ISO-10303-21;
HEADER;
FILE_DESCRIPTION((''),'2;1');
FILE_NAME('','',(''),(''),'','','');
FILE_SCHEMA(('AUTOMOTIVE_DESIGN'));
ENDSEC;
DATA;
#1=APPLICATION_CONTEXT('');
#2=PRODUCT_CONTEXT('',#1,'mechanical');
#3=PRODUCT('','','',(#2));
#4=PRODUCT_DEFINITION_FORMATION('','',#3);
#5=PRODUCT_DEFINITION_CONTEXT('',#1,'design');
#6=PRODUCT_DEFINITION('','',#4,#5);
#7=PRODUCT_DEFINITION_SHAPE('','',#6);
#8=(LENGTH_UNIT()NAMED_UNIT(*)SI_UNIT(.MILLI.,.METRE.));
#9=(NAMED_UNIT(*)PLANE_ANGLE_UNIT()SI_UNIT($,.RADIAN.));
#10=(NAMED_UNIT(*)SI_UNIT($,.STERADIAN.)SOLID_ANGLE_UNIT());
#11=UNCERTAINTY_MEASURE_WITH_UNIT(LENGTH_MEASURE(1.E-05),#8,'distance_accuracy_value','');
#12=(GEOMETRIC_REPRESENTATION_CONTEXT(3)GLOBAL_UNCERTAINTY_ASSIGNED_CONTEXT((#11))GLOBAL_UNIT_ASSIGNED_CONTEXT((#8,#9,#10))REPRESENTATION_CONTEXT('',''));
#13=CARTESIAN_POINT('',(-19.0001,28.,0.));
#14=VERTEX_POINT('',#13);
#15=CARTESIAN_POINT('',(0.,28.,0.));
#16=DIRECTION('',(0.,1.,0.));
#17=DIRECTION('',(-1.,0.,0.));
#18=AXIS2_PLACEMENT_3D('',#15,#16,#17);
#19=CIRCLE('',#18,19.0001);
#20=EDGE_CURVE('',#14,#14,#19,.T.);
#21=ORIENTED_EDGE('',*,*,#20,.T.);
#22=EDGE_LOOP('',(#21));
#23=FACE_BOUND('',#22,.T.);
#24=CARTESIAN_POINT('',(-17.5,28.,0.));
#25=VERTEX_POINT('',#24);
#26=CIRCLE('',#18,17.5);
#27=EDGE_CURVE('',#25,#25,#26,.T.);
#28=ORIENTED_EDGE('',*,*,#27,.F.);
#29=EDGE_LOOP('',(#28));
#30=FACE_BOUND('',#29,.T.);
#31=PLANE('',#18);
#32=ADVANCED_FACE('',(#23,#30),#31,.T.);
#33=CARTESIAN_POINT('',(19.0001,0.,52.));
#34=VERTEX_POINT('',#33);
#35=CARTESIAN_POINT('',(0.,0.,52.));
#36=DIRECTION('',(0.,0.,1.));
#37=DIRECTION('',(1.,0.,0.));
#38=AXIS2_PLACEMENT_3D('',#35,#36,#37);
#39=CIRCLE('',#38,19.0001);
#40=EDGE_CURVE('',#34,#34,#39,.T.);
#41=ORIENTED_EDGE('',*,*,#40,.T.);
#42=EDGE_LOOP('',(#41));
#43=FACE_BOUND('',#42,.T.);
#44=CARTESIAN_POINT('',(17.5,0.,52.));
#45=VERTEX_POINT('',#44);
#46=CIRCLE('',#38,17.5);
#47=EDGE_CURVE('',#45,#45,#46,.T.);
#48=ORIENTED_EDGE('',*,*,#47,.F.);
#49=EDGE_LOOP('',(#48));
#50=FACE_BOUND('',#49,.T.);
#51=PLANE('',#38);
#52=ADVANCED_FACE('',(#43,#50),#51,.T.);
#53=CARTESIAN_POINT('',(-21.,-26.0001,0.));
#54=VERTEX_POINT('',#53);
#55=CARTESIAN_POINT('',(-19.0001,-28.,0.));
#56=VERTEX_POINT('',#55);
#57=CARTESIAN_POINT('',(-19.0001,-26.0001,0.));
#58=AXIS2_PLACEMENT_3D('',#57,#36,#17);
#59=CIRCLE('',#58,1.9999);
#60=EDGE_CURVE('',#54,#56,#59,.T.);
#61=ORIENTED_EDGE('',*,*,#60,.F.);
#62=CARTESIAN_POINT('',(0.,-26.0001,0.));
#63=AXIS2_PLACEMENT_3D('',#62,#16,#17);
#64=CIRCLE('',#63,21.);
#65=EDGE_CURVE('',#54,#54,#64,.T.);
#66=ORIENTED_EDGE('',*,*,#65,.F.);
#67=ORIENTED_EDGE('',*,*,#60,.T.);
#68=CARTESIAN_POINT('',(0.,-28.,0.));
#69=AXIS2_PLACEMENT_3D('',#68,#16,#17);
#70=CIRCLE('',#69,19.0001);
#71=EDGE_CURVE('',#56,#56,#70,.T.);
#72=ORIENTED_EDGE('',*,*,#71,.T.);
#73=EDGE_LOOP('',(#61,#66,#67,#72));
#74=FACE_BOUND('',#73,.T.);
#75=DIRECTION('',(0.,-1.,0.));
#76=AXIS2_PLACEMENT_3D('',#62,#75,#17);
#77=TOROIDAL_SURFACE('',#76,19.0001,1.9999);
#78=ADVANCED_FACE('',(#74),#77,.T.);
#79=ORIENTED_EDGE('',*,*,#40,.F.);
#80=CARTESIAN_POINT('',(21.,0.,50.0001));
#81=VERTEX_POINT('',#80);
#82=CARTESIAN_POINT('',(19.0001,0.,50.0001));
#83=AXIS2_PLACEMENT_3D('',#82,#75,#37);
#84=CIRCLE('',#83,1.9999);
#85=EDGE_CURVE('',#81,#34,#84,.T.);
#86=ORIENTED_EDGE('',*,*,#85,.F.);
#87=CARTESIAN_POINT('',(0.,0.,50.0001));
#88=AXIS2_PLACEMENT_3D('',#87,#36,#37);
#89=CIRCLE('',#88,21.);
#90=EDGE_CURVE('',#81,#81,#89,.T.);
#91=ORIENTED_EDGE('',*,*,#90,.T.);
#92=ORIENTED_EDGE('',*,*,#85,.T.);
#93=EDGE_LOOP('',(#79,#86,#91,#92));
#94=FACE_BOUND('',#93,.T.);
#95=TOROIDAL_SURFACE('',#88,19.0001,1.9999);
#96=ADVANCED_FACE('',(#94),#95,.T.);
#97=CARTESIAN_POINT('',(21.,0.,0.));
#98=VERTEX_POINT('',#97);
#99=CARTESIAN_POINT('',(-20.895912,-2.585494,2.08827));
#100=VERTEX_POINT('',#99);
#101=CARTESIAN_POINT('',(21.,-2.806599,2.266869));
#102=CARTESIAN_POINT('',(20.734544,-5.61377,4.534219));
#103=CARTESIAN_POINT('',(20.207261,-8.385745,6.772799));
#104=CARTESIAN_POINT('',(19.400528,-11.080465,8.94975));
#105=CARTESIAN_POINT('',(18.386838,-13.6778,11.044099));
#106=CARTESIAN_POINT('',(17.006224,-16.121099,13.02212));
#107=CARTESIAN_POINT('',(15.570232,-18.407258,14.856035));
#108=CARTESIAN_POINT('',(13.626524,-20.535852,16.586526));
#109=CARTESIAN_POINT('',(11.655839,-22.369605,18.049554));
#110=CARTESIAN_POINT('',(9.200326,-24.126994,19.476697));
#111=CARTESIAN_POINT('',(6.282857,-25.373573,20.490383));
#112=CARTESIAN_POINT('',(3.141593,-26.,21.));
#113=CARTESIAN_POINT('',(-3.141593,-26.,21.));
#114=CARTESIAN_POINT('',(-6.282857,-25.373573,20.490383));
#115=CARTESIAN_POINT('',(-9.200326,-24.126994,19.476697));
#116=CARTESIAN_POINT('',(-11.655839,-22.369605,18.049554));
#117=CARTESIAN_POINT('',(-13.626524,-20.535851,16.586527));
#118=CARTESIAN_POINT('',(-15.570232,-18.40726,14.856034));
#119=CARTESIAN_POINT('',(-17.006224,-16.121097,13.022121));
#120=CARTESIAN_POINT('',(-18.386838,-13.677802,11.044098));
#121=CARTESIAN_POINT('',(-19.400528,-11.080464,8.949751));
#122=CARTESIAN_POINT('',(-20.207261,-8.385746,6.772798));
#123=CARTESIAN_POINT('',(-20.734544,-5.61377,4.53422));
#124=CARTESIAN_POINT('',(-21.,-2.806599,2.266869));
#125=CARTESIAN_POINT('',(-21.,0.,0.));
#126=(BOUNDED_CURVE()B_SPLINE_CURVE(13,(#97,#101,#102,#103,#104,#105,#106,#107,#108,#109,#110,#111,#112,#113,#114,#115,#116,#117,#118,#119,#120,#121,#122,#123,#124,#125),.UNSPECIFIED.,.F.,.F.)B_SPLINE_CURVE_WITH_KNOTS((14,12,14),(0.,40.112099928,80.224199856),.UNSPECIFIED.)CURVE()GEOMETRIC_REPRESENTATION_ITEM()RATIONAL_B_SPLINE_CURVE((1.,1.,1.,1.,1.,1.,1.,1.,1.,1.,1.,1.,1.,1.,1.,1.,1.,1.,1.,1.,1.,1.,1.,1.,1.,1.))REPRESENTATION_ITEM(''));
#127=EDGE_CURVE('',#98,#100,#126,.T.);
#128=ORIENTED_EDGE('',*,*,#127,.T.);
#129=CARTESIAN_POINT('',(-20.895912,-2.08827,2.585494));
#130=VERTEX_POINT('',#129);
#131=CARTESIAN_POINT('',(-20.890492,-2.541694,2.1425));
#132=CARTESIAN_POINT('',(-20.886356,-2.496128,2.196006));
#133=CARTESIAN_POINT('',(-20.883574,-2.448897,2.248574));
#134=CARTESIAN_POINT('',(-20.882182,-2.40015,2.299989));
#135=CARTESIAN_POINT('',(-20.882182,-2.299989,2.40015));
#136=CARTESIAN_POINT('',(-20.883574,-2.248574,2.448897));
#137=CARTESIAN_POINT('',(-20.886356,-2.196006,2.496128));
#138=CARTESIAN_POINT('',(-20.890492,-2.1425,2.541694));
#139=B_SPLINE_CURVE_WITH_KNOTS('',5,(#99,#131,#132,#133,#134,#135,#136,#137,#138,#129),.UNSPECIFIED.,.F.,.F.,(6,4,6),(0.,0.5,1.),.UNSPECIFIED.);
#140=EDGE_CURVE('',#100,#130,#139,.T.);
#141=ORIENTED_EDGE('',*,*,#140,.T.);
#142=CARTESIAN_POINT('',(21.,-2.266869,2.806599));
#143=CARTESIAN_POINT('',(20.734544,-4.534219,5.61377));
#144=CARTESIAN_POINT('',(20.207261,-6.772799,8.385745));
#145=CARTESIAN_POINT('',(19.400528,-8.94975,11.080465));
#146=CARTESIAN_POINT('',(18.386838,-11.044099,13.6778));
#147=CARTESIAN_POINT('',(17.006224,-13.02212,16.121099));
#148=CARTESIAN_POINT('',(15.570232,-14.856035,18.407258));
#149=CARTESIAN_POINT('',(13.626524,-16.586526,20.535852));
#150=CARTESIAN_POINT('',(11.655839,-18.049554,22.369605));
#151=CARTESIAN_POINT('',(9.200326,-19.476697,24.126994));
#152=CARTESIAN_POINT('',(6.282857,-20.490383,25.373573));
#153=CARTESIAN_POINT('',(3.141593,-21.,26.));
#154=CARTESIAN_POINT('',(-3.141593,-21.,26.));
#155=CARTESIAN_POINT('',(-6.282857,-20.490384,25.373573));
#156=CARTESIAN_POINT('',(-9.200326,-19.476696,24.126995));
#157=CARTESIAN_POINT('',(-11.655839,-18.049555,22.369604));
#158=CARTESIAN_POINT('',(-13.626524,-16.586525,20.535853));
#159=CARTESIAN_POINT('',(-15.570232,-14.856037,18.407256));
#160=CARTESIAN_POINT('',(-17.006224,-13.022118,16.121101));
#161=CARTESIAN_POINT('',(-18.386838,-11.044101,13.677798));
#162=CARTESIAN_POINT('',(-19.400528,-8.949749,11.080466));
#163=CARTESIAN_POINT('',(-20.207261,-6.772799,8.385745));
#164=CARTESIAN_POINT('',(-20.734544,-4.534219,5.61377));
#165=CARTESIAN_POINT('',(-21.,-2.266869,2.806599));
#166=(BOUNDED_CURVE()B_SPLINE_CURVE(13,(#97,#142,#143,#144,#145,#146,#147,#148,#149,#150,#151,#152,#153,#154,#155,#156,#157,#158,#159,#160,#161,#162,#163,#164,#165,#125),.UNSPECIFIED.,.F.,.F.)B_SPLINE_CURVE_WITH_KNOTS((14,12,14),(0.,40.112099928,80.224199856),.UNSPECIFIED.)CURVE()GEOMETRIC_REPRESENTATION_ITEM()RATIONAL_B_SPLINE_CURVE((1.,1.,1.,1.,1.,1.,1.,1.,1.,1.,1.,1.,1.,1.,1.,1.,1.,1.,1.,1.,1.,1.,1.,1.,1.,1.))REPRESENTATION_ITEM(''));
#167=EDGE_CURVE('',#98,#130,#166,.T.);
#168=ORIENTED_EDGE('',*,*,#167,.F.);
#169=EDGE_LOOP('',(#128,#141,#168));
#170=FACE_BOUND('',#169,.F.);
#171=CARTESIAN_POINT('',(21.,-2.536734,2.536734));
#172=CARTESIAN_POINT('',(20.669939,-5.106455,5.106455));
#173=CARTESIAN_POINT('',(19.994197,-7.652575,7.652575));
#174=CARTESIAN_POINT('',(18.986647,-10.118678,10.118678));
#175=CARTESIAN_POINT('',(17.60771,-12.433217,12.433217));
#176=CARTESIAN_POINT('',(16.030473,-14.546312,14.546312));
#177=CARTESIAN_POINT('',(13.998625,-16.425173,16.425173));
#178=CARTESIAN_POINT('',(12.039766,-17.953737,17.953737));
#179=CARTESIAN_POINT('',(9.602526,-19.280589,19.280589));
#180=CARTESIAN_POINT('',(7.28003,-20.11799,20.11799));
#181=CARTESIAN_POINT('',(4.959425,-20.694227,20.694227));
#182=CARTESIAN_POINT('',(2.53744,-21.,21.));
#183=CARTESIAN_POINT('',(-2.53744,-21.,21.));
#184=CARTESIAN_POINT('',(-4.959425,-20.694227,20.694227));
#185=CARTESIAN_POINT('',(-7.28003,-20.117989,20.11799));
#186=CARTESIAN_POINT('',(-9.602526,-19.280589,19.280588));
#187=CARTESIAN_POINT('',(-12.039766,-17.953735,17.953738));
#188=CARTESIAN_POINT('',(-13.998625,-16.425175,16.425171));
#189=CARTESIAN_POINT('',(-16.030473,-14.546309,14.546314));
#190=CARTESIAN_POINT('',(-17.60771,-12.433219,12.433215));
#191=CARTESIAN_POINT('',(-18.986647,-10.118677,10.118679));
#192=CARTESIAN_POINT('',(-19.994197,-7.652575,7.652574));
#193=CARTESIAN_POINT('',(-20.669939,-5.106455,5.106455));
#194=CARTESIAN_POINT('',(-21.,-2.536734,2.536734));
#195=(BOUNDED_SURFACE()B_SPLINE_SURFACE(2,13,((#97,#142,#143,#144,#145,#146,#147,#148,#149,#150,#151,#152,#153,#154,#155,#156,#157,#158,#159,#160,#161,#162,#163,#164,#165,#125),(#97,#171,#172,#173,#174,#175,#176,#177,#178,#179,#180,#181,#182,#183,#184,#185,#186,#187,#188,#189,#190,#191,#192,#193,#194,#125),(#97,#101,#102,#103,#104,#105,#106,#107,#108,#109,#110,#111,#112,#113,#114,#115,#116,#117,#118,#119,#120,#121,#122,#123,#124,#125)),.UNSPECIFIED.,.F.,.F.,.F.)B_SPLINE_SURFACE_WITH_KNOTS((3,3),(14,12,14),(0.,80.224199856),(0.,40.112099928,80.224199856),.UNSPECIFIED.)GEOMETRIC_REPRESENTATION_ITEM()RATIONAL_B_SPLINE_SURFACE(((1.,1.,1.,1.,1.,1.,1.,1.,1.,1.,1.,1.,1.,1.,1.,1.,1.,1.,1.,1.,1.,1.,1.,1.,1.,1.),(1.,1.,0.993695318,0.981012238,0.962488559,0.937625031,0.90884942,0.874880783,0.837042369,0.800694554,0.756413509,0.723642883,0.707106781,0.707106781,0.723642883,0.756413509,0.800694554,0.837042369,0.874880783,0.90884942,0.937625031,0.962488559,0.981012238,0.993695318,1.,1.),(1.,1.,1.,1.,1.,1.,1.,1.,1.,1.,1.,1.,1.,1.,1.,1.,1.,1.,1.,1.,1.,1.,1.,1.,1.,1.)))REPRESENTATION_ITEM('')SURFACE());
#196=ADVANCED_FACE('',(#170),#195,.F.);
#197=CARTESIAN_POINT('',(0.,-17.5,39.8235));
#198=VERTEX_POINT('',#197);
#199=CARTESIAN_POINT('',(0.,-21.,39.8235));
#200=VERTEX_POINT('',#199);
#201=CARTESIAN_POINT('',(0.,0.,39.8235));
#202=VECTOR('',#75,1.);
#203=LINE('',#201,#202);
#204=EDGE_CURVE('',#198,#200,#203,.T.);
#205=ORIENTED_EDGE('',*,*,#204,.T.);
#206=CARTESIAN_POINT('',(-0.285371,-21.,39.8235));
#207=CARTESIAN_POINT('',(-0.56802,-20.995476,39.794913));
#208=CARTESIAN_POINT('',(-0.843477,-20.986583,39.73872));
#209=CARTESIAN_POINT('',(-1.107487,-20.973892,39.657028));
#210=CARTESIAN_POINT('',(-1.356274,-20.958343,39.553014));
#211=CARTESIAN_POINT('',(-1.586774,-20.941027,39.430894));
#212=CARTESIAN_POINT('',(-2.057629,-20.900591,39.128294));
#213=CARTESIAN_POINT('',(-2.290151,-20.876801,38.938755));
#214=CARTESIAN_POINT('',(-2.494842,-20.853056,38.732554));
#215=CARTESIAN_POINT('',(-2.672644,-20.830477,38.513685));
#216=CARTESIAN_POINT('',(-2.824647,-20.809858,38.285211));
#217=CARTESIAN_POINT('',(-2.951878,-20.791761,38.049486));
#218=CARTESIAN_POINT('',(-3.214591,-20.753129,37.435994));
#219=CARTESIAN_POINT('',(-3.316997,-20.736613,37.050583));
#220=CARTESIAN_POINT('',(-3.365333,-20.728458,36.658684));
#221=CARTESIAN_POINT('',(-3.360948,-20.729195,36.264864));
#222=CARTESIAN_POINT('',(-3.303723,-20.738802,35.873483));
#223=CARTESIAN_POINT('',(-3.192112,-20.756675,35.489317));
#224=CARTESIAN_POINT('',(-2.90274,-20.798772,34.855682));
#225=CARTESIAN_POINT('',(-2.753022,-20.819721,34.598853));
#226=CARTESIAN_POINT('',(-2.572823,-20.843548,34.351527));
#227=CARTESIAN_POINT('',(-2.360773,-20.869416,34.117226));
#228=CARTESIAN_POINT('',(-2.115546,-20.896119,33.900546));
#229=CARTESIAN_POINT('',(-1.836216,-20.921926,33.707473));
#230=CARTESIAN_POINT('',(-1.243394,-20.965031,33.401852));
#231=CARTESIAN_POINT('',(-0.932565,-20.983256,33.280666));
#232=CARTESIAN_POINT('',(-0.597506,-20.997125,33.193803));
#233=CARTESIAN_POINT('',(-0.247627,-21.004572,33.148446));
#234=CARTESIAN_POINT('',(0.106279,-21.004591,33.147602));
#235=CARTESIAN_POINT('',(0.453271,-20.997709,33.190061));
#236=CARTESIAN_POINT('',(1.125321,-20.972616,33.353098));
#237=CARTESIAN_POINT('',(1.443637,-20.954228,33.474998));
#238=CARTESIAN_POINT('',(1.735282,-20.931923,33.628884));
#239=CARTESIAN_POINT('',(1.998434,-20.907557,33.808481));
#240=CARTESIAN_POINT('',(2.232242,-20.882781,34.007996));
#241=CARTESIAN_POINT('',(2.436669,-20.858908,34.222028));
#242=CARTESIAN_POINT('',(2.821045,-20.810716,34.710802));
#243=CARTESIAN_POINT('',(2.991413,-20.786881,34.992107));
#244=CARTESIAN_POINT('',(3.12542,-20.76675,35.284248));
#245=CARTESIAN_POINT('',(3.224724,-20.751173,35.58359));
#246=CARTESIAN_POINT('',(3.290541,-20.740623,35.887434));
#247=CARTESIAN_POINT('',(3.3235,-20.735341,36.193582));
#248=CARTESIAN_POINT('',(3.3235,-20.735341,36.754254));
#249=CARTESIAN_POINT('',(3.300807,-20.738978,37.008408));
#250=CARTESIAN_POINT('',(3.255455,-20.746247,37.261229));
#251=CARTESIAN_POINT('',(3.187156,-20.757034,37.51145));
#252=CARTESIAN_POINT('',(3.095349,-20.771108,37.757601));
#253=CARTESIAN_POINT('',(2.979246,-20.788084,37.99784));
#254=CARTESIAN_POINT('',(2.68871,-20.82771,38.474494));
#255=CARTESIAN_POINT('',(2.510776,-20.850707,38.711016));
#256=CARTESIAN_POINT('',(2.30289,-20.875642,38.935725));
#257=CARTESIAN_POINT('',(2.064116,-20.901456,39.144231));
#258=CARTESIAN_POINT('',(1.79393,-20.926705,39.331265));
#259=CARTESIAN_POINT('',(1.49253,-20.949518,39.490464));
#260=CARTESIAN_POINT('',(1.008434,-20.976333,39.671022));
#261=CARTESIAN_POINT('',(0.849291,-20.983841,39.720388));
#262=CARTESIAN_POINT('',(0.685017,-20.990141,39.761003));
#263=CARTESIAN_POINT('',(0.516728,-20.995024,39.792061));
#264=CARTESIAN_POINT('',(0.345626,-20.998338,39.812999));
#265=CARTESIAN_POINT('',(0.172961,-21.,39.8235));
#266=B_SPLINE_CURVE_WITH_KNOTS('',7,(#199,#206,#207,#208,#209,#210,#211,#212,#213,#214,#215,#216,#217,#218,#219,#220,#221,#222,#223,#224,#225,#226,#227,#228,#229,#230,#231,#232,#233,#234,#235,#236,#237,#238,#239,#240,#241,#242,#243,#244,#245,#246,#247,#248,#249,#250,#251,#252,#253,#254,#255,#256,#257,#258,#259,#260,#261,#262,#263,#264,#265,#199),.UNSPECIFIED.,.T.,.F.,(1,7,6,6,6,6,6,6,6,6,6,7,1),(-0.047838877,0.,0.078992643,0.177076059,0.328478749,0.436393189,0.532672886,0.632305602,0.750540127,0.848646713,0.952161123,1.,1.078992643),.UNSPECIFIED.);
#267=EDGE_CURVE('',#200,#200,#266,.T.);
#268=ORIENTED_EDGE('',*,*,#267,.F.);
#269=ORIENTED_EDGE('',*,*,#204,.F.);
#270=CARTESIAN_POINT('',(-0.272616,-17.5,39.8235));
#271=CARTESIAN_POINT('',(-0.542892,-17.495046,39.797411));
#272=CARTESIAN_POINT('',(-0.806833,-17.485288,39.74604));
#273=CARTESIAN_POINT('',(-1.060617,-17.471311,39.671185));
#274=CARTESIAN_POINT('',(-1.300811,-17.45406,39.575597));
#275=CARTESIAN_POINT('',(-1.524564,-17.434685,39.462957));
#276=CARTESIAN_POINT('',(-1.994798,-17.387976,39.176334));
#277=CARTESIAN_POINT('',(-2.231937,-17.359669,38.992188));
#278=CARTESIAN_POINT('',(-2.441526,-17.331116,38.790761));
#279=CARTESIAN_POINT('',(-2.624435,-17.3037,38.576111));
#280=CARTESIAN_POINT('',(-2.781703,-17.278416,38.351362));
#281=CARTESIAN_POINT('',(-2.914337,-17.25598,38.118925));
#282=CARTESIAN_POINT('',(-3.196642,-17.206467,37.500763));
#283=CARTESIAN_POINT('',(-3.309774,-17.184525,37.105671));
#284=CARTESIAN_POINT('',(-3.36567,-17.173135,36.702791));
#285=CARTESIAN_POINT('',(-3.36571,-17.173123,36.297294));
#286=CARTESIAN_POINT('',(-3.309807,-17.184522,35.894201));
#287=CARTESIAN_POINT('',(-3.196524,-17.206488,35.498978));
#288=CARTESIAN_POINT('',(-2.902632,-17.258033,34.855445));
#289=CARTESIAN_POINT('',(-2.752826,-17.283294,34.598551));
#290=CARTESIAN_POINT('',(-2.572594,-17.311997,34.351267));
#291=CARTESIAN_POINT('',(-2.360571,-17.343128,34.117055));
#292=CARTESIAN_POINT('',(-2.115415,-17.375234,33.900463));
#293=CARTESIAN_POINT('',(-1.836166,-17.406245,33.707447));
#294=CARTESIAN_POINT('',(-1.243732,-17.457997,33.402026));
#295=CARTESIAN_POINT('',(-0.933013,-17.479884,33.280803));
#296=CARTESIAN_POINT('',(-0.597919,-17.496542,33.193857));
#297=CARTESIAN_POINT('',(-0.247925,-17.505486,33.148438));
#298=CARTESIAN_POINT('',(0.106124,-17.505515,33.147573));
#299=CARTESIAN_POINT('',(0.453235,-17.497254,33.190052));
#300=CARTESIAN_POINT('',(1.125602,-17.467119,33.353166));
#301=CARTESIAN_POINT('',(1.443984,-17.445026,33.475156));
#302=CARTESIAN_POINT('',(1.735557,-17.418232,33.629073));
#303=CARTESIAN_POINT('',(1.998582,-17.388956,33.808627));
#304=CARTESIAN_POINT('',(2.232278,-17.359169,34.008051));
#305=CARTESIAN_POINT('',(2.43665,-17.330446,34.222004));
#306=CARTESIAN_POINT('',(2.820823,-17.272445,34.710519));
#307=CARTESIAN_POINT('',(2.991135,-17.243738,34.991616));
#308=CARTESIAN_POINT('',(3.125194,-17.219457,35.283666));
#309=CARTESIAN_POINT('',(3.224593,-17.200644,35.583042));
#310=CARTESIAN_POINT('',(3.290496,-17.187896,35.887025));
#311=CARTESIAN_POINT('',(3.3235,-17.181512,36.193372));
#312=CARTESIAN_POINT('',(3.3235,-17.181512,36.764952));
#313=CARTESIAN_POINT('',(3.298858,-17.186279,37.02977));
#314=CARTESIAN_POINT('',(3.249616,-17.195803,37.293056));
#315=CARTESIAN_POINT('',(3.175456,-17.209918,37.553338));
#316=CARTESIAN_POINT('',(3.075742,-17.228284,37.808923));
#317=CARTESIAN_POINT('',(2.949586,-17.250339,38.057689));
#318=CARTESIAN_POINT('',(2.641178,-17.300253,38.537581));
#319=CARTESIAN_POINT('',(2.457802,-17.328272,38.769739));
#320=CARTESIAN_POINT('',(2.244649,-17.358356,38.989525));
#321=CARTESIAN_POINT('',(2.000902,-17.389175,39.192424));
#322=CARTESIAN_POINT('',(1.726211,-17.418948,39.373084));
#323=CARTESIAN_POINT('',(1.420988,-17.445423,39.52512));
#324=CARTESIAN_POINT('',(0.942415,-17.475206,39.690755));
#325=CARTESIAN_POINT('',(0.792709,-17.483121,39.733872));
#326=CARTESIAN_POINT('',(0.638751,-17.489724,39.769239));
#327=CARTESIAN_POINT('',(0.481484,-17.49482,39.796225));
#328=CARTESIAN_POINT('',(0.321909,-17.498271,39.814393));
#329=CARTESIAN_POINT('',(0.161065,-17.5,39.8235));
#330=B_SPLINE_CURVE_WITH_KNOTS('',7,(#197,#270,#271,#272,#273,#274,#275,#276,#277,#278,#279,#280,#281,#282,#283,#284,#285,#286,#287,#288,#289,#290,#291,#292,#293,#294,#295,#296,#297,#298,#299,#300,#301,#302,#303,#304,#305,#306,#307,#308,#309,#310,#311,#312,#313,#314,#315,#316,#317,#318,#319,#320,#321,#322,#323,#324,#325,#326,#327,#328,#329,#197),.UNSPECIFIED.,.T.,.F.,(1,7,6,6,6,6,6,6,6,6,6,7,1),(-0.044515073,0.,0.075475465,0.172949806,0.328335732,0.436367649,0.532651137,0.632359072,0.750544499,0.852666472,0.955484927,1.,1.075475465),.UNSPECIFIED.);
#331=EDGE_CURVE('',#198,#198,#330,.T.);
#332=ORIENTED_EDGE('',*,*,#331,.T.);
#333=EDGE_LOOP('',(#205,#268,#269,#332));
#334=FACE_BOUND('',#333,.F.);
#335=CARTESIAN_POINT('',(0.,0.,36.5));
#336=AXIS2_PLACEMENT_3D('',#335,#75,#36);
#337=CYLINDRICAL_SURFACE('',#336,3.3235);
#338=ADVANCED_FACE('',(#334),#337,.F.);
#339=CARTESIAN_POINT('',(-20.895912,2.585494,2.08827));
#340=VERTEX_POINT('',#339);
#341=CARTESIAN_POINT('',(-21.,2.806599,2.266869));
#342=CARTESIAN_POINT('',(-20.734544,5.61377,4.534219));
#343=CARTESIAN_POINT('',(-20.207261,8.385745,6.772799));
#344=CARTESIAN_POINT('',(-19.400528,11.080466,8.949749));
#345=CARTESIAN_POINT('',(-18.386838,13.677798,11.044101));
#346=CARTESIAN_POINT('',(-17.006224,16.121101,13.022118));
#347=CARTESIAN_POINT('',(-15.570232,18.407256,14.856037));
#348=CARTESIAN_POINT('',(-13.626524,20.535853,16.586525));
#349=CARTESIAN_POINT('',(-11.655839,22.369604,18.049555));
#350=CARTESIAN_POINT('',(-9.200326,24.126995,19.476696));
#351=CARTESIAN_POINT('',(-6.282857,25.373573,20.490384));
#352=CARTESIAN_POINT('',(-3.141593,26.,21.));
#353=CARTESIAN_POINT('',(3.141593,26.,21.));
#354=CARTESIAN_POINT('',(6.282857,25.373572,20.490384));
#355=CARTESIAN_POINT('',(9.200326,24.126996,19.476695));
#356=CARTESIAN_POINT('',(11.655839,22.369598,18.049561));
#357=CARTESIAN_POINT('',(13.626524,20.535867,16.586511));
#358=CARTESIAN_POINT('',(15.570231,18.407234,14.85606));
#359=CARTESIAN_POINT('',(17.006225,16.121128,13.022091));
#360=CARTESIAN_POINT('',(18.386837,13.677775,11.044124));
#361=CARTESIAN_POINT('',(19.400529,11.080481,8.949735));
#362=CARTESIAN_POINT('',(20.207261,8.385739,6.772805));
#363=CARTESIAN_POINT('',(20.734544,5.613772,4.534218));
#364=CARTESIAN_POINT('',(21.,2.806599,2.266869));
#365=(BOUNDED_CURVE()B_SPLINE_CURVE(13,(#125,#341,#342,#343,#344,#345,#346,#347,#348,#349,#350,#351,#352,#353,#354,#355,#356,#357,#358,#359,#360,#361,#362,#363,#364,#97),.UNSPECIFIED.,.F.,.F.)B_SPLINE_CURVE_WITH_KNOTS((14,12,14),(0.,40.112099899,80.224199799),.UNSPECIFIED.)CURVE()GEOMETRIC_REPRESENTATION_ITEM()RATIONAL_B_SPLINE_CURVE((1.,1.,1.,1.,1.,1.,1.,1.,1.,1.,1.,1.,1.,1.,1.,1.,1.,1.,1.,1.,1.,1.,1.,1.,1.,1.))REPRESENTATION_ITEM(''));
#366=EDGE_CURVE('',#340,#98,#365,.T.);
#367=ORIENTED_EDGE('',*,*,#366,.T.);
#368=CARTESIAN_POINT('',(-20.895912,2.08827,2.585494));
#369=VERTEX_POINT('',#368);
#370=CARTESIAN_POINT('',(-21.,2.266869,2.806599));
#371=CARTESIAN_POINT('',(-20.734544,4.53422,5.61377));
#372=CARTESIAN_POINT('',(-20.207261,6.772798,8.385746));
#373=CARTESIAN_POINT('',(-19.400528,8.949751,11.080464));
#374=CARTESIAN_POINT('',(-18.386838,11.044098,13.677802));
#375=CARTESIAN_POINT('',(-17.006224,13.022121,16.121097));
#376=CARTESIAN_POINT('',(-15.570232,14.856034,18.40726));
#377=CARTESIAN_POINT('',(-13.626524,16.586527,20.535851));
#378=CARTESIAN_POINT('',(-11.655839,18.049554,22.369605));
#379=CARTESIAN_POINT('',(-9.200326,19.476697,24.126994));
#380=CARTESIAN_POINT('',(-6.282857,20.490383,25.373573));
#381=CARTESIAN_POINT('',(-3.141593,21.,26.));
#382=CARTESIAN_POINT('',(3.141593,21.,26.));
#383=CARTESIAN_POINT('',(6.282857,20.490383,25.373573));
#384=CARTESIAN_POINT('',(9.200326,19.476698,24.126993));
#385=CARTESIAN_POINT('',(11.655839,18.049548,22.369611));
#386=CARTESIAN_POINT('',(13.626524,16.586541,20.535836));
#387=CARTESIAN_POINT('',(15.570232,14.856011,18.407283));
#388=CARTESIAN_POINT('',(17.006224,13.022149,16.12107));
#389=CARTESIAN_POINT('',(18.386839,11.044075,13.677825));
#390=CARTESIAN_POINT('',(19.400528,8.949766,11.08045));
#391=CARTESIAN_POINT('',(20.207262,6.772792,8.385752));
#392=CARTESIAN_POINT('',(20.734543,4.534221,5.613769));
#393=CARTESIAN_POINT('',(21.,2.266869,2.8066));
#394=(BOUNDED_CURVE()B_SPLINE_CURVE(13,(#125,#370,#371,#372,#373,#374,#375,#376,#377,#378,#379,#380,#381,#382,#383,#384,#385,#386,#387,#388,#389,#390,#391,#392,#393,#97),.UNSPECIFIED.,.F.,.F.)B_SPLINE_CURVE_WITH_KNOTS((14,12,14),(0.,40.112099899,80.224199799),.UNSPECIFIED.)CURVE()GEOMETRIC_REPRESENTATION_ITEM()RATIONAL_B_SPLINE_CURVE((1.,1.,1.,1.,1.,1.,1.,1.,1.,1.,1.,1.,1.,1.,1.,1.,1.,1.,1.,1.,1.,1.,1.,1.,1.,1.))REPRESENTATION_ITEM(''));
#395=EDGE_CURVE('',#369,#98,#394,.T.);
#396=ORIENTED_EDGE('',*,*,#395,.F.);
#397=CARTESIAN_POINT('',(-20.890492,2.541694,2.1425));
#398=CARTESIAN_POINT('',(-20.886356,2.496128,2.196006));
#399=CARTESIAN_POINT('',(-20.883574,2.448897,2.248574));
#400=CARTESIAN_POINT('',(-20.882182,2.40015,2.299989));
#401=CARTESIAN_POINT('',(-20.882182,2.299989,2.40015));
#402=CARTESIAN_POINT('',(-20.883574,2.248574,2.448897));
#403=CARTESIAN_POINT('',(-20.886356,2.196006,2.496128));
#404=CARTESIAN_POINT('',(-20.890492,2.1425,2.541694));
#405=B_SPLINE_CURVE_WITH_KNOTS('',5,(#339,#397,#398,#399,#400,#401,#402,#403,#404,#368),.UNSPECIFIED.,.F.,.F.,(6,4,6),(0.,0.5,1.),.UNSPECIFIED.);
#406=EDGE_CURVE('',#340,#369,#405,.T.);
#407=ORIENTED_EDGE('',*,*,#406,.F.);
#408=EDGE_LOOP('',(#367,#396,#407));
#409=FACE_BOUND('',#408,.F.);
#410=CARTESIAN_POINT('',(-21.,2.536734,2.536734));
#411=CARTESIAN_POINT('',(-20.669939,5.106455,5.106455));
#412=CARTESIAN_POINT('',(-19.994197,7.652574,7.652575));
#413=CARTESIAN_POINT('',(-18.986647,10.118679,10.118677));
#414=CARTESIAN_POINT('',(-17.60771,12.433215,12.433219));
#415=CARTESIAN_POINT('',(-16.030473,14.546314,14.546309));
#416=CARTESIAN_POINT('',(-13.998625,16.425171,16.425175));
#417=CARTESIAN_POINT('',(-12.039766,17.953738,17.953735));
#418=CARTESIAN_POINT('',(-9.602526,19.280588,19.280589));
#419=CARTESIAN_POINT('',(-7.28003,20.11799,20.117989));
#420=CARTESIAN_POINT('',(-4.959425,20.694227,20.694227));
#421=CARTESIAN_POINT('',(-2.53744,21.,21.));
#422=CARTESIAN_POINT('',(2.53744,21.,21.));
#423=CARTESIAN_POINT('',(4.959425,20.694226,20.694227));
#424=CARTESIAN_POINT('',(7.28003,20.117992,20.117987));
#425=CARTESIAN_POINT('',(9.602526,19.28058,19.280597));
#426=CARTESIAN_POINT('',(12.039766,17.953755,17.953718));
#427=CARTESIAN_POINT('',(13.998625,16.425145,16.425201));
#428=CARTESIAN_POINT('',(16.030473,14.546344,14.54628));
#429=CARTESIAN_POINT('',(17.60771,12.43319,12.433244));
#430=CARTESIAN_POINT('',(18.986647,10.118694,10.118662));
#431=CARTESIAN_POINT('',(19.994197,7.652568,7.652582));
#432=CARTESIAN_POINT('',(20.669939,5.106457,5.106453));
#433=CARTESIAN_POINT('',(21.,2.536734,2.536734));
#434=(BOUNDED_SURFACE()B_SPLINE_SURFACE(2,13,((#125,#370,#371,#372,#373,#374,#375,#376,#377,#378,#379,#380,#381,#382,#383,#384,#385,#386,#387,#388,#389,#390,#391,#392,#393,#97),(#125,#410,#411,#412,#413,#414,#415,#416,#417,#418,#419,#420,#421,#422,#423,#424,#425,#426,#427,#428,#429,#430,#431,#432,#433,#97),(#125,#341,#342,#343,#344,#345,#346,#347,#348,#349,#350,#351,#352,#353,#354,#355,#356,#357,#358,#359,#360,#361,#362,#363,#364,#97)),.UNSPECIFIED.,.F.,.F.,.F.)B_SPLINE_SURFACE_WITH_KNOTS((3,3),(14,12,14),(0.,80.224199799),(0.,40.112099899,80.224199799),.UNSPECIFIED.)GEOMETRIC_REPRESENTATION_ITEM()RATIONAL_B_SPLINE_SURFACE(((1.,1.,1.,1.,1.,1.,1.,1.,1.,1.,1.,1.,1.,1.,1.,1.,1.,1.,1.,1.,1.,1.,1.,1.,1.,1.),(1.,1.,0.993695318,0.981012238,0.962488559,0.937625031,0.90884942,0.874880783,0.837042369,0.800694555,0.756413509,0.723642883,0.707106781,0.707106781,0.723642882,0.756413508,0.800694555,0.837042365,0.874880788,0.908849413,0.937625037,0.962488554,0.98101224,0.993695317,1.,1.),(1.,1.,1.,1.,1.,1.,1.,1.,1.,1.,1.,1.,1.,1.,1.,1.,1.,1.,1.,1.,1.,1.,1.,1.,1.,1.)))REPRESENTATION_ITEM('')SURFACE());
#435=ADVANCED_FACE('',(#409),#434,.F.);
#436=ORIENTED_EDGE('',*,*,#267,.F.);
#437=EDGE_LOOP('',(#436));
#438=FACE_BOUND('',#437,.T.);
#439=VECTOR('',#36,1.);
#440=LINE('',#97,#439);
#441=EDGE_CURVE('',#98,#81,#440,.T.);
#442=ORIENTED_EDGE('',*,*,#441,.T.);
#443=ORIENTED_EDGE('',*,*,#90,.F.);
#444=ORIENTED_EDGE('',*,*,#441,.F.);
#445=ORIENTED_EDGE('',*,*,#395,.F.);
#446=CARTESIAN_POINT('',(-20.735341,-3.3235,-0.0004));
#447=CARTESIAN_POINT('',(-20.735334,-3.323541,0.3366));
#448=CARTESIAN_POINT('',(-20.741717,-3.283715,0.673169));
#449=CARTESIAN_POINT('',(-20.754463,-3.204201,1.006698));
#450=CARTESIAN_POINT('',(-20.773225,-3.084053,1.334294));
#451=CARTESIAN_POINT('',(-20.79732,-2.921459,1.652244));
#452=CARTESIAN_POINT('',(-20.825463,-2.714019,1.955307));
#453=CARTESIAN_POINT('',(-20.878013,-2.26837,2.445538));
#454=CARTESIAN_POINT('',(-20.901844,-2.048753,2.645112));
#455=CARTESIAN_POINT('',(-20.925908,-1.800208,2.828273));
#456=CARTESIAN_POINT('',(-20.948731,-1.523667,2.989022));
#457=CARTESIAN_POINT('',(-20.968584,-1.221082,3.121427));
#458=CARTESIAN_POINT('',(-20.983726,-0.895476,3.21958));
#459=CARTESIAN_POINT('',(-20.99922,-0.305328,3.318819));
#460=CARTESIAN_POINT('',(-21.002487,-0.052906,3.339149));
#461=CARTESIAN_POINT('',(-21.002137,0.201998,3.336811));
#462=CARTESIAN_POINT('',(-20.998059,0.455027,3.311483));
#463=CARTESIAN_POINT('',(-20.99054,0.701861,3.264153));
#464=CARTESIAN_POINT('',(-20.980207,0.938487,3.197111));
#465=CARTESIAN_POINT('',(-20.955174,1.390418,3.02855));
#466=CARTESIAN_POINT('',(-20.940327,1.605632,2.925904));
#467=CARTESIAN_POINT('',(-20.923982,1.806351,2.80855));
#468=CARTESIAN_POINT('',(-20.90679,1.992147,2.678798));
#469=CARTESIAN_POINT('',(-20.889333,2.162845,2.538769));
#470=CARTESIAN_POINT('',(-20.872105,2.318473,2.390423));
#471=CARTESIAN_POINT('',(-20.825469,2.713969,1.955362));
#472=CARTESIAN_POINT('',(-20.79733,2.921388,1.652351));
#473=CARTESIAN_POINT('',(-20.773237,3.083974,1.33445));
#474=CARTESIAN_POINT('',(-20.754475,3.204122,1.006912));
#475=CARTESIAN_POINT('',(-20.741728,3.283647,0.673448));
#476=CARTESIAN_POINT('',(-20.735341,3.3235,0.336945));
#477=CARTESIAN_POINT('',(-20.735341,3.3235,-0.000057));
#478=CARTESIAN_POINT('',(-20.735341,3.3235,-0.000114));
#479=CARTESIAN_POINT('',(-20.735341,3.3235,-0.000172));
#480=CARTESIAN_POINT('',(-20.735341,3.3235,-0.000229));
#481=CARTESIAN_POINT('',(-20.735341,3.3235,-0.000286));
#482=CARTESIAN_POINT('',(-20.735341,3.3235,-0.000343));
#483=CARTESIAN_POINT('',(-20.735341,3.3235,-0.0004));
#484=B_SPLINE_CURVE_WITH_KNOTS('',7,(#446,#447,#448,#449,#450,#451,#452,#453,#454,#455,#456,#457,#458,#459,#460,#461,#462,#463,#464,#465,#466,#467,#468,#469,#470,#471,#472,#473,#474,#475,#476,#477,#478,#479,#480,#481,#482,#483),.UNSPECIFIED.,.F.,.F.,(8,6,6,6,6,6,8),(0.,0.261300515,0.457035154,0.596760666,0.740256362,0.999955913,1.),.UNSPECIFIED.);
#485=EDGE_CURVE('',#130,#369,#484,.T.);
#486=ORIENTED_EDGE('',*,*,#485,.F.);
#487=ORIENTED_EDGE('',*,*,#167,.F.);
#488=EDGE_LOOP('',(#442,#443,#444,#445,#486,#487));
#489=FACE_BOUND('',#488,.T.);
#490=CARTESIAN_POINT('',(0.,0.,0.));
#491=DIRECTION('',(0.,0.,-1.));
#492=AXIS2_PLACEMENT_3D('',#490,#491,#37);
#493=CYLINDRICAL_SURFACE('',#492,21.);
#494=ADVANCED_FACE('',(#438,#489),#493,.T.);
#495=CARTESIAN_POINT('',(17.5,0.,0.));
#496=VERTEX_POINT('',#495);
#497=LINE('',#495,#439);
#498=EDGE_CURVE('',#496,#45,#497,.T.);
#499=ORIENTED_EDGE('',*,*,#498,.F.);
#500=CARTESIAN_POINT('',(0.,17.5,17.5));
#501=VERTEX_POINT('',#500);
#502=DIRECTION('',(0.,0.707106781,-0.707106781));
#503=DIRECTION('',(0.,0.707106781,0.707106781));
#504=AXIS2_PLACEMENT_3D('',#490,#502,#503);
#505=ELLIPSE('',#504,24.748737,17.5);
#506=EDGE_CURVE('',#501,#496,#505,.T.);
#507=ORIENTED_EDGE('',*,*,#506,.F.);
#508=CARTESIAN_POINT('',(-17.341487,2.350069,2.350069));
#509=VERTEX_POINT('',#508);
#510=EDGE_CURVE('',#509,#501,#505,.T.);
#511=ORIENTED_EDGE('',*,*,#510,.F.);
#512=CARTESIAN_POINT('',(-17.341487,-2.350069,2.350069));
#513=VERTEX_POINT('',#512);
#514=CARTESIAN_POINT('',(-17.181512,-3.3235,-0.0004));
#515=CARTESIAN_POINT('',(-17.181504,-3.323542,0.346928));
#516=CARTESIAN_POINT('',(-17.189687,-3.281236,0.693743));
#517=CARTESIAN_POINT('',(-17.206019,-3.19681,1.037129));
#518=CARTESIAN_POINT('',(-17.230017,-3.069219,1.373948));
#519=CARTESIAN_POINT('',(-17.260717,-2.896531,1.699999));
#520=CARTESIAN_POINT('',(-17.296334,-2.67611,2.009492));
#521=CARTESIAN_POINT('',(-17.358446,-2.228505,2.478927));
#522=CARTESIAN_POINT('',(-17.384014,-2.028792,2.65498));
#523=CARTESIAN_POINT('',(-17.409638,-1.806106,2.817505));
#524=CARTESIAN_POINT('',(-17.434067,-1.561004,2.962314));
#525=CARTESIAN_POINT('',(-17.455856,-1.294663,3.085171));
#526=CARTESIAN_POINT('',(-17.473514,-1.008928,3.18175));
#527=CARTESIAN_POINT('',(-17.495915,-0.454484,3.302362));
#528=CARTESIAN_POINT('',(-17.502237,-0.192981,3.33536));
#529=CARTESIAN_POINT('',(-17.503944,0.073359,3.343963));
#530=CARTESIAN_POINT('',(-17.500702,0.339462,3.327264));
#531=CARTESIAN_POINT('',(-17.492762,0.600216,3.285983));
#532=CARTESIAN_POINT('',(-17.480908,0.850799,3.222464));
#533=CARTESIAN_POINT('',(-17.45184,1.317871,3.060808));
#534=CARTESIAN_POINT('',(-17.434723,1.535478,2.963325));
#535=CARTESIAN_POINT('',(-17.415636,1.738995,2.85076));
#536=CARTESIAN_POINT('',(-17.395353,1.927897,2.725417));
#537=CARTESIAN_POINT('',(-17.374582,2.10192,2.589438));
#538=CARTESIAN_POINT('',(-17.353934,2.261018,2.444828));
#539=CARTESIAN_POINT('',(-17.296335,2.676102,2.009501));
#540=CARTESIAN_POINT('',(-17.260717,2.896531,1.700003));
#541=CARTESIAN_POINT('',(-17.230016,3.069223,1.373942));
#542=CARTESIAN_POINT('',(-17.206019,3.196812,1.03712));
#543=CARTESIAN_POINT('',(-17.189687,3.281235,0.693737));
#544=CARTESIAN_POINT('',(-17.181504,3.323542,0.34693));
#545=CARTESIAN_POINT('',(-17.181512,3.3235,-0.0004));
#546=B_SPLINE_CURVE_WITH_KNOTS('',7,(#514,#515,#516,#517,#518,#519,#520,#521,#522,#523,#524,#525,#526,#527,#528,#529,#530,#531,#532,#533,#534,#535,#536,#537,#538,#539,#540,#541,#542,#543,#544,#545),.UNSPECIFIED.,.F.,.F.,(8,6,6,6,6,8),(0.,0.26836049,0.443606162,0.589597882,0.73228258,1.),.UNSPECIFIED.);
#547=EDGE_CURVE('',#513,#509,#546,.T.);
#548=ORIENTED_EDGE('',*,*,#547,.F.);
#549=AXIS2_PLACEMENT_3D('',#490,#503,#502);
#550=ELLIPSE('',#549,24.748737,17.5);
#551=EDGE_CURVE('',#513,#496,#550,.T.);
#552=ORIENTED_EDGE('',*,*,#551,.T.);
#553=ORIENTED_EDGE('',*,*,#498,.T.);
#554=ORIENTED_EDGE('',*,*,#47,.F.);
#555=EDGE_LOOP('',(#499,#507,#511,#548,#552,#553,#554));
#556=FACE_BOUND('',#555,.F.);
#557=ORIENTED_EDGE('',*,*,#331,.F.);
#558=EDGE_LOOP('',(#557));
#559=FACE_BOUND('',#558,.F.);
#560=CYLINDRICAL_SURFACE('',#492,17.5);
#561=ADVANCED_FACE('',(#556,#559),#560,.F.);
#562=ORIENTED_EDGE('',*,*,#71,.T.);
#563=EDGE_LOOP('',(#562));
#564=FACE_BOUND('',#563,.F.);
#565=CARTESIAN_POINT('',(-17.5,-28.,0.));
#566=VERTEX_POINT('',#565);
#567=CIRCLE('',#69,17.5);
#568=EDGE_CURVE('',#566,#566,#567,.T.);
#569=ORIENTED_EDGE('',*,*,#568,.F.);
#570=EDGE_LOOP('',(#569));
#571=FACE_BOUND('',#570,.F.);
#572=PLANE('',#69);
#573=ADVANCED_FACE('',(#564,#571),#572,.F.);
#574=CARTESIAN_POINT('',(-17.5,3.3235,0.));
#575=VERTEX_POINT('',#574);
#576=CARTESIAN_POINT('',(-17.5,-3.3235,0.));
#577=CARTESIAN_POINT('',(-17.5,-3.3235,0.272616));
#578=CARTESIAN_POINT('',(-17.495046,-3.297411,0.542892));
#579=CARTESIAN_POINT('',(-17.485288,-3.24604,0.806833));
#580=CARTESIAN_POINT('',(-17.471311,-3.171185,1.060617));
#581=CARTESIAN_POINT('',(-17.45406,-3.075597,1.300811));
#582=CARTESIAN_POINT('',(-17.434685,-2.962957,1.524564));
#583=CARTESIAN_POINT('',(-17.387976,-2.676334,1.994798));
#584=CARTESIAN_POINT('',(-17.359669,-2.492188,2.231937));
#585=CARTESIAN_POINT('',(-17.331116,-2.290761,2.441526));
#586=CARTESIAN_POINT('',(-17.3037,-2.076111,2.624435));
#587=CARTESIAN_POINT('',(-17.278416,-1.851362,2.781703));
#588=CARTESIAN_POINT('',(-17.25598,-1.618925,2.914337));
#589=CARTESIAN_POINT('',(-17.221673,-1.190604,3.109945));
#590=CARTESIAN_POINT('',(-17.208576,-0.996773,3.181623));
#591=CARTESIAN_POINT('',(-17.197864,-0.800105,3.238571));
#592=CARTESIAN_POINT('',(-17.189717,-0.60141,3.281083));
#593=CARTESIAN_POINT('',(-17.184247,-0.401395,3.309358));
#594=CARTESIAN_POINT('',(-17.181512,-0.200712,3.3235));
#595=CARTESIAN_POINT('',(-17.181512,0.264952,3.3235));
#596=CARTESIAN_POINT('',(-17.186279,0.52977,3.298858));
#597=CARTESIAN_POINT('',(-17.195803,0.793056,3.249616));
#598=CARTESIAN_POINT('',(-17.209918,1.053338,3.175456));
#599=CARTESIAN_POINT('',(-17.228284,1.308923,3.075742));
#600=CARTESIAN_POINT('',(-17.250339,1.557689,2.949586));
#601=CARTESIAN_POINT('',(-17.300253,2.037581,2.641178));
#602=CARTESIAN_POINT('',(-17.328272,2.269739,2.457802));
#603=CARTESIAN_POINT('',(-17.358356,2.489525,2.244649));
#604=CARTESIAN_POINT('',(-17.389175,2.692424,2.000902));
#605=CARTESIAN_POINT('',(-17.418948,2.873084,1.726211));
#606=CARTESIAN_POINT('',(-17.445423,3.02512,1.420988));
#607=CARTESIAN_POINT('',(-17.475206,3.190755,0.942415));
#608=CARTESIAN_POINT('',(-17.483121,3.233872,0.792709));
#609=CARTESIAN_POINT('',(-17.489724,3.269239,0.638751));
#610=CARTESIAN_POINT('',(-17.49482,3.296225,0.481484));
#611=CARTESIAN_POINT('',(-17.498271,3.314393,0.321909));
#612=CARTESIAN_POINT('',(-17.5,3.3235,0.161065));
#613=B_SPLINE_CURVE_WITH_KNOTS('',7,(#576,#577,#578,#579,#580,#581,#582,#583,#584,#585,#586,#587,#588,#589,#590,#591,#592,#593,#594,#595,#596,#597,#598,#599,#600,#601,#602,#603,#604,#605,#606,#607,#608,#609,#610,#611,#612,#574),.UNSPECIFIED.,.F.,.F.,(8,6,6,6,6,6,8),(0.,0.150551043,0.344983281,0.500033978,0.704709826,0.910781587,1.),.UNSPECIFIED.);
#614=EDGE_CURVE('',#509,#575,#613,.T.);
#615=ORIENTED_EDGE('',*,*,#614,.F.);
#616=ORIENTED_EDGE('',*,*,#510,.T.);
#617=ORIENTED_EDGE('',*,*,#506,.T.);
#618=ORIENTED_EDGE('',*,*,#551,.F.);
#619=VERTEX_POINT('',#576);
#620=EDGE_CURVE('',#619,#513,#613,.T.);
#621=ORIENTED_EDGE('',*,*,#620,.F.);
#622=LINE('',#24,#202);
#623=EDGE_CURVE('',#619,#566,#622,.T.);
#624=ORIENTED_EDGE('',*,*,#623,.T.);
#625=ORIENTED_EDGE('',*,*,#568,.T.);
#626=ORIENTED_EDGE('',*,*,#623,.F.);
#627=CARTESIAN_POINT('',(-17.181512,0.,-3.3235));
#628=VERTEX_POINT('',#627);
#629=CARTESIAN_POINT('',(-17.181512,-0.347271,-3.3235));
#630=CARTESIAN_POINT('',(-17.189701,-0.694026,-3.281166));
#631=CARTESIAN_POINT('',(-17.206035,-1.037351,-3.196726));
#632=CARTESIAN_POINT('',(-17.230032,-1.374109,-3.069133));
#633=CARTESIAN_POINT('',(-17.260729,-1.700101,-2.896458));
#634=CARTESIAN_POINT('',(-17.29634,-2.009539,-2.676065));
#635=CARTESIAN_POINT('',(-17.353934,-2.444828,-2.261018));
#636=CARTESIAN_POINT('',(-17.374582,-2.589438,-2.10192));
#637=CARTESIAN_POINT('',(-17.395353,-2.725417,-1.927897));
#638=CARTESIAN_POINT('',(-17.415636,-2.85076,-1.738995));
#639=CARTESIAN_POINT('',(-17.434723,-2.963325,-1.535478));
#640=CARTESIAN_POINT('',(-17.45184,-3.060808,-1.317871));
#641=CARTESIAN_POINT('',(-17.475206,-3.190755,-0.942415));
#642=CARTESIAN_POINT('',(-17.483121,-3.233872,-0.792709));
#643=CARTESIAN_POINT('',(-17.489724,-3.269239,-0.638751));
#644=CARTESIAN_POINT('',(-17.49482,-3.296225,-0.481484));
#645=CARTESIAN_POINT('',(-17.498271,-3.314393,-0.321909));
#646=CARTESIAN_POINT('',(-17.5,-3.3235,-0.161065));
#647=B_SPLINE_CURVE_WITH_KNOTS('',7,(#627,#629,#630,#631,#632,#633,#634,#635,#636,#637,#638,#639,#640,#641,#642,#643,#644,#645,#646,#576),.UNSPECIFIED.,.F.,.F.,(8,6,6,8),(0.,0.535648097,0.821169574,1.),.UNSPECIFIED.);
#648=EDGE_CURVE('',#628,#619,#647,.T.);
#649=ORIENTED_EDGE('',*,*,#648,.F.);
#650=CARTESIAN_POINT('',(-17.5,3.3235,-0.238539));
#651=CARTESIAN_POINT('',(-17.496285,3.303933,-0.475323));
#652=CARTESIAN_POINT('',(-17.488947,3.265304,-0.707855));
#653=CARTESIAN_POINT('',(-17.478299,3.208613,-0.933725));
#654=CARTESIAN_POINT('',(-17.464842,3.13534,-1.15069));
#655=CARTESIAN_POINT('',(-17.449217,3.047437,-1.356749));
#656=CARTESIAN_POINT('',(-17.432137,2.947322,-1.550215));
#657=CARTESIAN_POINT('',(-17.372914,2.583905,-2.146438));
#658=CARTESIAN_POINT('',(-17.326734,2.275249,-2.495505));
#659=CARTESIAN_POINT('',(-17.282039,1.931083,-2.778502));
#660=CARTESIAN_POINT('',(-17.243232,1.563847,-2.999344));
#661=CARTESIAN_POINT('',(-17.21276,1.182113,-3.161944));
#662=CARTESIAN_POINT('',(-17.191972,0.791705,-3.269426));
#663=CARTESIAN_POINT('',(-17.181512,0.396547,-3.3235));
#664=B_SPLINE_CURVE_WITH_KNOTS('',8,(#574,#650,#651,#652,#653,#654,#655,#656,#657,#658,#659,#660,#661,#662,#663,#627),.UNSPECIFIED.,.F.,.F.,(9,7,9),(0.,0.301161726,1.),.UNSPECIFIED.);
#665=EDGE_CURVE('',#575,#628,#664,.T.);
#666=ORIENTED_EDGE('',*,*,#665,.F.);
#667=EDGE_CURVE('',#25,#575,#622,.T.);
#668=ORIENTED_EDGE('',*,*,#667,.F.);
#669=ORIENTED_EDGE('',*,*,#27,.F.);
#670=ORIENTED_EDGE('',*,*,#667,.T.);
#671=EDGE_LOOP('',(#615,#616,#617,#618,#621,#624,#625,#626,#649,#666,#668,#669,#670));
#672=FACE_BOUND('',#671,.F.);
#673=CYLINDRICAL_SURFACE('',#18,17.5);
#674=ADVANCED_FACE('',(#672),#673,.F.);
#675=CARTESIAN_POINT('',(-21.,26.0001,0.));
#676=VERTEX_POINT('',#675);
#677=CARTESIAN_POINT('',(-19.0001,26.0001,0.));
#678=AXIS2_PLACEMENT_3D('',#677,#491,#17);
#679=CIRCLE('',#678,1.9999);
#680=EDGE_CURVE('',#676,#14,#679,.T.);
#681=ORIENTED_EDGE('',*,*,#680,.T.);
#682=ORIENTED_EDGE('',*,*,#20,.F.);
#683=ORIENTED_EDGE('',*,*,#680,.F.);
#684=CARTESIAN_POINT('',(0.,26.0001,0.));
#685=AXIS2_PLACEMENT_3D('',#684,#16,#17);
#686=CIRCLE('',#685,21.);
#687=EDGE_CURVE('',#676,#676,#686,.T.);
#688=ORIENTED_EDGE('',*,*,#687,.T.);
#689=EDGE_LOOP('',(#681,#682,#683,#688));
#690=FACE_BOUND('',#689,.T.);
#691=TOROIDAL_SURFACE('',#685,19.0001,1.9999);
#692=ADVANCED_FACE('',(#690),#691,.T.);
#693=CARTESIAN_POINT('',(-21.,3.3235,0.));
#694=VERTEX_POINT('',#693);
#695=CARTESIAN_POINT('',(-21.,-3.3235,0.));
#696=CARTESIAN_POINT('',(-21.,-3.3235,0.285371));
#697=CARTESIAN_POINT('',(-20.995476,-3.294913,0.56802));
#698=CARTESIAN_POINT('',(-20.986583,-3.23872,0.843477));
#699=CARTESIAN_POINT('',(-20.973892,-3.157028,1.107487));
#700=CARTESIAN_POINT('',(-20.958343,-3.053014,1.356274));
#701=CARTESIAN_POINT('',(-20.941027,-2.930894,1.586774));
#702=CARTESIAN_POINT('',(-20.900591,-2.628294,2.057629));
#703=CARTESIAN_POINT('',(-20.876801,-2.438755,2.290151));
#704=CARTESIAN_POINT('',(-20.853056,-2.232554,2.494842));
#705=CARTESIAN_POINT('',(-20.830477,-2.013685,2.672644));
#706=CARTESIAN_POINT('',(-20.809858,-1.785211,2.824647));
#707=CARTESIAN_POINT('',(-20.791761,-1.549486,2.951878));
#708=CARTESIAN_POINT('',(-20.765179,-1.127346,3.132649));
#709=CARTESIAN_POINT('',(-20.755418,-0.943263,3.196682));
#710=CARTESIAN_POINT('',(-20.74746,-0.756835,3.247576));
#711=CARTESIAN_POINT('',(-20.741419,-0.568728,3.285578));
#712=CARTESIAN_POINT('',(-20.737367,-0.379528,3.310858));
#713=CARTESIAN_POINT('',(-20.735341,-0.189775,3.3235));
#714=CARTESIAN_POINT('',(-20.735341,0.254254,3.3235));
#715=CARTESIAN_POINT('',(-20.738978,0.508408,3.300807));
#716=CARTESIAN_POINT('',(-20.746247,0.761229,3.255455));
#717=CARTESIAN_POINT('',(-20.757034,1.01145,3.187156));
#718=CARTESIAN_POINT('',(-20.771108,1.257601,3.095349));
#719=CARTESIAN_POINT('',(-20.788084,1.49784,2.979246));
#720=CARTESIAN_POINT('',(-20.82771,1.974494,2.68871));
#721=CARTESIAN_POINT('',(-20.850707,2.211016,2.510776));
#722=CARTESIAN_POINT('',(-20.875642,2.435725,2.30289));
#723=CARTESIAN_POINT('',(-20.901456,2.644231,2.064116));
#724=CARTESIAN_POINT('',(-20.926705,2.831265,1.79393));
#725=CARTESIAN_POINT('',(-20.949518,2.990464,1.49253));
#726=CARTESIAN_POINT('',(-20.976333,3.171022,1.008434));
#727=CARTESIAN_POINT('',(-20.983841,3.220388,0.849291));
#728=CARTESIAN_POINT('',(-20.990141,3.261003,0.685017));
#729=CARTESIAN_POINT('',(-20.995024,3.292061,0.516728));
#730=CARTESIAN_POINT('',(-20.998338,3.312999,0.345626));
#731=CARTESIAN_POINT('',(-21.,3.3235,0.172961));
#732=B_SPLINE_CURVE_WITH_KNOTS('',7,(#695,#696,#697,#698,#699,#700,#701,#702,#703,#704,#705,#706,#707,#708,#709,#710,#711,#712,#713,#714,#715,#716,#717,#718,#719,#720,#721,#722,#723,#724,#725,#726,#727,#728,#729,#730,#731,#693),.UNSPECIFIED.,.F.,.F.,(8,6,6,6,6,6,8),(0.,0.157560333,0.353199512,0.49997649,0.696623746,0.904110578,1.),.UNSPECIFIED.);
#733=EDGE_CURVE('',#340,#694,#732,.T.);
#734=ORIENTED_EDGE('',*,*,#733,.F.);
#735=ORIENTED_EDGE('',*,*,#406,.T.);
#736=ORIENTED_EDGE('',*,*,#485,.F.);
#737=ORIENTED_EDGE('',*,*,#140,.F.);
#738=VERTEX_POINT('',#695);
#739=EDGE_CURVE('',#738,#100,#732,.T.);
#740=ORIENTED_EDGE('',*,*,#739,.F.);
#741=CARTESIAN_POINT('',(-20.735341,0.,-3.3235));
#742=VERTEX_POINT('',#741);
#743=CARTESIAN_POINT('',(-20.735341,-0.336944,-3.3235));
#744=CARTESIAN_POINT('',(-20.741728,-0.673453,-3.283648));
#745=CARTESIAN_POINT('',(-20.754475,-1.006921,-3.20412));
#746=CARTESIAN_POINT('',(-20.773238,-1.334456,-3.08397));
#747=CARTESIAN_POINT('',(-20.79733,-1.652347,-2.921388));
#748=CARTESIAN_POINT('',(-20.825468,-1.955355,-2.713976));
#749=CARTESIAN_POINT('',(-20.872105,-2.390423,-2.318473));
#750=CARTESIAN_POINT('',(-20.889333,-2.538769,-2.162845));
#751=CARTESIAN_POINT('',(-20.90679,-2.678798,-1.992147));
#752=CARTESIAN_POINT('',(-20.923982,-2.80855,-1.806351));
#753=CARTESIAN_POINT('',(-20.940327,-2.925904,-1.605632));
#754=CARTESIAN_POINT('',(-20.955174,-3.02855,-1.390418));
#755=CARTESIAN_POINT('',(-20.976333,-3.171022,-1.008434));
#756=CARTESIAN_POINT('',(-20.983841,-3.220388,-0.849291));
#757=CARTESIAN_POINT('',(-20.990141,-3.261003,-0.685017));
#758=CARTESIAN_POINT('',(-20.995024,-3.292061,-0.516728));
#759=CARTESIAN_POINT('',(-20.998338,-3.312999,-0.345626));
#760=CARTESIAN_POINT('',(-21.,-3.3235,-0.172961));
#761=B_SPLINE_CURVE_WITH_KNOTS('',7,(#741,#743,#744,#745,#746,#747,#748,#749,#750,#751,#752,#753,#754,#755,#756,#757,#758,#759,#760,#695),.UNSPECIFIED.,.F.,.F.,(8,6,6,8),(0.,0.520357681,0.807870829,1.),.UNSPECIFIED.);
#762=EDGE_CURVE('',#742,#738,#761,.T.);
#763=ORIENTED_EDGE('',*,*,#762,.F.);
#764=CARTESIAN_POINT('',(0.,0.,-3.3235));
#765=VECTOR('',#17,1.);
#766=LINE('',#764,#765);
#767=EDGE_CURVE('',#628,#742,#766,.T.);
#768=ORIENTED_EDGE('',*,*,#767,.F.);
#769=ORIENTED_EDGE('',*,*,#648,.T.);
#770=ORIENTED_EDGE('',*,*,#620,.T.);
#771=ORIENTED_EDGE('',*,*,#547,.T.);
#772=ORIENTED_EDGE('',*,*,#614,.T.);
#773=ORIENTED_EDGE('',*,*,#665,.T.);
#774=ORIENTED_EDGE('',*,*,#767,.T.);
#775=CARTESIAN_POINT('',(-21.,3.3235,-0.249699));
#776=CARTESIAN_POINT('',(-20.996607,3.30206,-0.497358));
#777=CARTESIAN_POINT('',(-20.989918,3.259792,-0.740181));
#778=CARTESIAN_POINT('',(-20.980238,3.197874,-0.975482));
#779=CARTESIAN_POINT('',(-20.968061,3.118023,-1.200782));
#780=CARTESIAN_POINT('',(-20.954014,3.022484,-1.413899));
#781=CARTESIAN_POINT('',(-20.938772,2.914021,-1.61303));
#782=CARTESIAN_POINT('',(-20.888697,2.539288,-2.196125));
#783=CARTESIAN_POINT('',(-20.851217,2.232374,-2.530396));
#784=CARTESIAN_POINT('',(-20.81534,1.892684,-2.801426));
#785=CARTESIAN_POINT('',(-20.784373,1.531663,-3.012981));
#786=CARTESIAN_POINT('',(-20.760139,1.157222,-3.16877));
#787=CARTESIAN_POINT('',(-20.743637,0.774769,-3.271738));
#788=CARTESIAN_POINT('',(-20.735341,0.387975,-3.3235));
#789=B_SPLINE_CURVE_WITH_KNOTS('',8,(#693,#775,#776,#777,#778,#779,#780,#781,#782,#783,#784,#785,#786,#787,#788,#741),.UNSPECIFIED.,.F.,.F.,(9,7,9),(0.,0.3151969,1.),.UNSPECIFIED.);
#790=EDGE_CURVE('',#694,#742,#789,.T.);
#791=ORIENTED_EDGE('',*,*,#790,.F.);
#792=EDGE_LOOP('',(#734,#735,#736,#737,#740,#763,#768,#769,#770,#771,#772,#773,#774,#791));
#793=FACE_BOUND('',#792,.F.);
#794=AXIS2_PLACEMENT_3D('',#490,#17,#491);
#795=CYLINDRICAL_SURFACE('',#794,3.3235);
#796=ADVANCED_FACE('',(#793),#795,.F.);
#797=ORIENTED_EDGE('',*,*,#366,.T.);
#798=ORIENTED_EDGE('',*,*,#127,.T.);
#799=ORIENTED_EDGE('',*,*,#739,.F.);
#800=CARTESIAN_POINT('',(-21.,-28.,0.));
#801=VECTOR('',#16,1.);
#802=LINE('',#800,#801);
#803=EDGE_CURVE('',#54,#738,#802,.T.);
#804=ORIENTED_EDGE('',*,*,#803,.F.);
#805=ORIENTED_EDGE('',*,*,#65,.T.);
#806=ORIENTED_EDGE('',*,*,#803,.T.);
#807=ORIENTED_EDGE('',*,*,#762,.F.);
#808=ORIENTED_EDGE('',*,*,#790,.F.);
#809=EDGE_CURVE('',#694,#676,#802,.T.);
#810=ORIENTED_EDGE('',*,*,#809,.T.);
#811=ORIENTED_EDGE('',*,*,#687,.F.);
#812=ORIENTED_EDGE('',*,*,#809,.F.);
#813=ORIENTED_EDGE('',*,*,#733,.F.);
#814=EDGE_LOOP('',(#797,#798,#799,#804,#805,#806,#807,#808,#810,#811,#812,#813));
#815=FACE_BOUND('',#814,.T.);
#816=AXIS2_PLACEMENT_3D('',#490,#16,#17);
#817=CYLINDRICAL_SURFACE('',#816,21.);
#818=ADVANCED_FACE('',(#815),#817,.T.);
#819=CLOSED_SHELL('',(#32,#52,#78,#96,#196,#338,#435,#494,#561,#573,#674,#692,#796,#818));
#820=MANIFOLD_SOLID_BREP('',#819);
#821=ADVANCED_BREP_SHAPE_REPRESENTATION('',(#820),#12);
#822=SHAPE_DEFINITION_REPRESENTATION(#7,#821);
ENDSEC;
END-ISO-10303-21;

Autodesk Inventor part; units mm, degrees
ref_plane "XY Plane" through (0, 0, 0) normal (0, 0, 1) x (1, 0, 0)
sketch "Sketch1" plane through (0, 0, 0) normal (0, 0, 1) x (1, 0, 0)
  circle A0 centre (0, 0) radius 17.5
  circle A1 centre (0, 0) radius 21
  dimension "d1" = 42
  dimension "d2" = 35
extrude "Extrusion1" add sketch "Sketch1" along normal blind 52 contours A0 | A1
sketch "Sketch2" plane through (0, 0, 0) normal (0, 1, 0) x (-1, 0, 0)
  circle A0 centre (0, 0) radius 17.5
  circle A1 centre (0, 0) radius 21
  dimension "d5" = 35
  dimension "d6" = 42
extrude "Extrusion2" add sketch "Sketch2" along normal mid plane 56 contours A0 | A1
extrude "Extrusion3" cut sketch "Sketch2" against normal up to surface (56 mm away) from surface at 28 contours A0
extrude "Extrusion4" cut sketch "Sketch1" along normal up to surface (52 mm away) contours A0
fillet "Fillet1" radius 5 2 edges at (0, 21, 21) (0, -21, 21)
hole "Hole1" at (0, 0, 0) direction (-1, 0, 0) diameter 6.647 end through all thread size "M8x1.25" class "6H" standard "ISO Metric profile"
ref_plane "Work Plane1" through (0, 0, 36.5) normal (0, 0, 1) x (1, 0, 0)
hole "Hole2" at (0, 0, 36.5) direction (0, -1, 0) diameter 6.647 end through all thread size "M8x1.25" class "6H" standard "ISO Metric profile"
fillet "Fillet2" radius 2 3 edges at (21, 28, 0) (-21, 0, 52) (21, -28, 0)
equation "\"d5\" = d2"
equation "\"d6\" = d1"
equation "\"d23\" = -0.5 * d3 + 0.25 * d1"
equation "\"d3\" = 52"
properties part number "L10-6" material "Aluminium Cast"
